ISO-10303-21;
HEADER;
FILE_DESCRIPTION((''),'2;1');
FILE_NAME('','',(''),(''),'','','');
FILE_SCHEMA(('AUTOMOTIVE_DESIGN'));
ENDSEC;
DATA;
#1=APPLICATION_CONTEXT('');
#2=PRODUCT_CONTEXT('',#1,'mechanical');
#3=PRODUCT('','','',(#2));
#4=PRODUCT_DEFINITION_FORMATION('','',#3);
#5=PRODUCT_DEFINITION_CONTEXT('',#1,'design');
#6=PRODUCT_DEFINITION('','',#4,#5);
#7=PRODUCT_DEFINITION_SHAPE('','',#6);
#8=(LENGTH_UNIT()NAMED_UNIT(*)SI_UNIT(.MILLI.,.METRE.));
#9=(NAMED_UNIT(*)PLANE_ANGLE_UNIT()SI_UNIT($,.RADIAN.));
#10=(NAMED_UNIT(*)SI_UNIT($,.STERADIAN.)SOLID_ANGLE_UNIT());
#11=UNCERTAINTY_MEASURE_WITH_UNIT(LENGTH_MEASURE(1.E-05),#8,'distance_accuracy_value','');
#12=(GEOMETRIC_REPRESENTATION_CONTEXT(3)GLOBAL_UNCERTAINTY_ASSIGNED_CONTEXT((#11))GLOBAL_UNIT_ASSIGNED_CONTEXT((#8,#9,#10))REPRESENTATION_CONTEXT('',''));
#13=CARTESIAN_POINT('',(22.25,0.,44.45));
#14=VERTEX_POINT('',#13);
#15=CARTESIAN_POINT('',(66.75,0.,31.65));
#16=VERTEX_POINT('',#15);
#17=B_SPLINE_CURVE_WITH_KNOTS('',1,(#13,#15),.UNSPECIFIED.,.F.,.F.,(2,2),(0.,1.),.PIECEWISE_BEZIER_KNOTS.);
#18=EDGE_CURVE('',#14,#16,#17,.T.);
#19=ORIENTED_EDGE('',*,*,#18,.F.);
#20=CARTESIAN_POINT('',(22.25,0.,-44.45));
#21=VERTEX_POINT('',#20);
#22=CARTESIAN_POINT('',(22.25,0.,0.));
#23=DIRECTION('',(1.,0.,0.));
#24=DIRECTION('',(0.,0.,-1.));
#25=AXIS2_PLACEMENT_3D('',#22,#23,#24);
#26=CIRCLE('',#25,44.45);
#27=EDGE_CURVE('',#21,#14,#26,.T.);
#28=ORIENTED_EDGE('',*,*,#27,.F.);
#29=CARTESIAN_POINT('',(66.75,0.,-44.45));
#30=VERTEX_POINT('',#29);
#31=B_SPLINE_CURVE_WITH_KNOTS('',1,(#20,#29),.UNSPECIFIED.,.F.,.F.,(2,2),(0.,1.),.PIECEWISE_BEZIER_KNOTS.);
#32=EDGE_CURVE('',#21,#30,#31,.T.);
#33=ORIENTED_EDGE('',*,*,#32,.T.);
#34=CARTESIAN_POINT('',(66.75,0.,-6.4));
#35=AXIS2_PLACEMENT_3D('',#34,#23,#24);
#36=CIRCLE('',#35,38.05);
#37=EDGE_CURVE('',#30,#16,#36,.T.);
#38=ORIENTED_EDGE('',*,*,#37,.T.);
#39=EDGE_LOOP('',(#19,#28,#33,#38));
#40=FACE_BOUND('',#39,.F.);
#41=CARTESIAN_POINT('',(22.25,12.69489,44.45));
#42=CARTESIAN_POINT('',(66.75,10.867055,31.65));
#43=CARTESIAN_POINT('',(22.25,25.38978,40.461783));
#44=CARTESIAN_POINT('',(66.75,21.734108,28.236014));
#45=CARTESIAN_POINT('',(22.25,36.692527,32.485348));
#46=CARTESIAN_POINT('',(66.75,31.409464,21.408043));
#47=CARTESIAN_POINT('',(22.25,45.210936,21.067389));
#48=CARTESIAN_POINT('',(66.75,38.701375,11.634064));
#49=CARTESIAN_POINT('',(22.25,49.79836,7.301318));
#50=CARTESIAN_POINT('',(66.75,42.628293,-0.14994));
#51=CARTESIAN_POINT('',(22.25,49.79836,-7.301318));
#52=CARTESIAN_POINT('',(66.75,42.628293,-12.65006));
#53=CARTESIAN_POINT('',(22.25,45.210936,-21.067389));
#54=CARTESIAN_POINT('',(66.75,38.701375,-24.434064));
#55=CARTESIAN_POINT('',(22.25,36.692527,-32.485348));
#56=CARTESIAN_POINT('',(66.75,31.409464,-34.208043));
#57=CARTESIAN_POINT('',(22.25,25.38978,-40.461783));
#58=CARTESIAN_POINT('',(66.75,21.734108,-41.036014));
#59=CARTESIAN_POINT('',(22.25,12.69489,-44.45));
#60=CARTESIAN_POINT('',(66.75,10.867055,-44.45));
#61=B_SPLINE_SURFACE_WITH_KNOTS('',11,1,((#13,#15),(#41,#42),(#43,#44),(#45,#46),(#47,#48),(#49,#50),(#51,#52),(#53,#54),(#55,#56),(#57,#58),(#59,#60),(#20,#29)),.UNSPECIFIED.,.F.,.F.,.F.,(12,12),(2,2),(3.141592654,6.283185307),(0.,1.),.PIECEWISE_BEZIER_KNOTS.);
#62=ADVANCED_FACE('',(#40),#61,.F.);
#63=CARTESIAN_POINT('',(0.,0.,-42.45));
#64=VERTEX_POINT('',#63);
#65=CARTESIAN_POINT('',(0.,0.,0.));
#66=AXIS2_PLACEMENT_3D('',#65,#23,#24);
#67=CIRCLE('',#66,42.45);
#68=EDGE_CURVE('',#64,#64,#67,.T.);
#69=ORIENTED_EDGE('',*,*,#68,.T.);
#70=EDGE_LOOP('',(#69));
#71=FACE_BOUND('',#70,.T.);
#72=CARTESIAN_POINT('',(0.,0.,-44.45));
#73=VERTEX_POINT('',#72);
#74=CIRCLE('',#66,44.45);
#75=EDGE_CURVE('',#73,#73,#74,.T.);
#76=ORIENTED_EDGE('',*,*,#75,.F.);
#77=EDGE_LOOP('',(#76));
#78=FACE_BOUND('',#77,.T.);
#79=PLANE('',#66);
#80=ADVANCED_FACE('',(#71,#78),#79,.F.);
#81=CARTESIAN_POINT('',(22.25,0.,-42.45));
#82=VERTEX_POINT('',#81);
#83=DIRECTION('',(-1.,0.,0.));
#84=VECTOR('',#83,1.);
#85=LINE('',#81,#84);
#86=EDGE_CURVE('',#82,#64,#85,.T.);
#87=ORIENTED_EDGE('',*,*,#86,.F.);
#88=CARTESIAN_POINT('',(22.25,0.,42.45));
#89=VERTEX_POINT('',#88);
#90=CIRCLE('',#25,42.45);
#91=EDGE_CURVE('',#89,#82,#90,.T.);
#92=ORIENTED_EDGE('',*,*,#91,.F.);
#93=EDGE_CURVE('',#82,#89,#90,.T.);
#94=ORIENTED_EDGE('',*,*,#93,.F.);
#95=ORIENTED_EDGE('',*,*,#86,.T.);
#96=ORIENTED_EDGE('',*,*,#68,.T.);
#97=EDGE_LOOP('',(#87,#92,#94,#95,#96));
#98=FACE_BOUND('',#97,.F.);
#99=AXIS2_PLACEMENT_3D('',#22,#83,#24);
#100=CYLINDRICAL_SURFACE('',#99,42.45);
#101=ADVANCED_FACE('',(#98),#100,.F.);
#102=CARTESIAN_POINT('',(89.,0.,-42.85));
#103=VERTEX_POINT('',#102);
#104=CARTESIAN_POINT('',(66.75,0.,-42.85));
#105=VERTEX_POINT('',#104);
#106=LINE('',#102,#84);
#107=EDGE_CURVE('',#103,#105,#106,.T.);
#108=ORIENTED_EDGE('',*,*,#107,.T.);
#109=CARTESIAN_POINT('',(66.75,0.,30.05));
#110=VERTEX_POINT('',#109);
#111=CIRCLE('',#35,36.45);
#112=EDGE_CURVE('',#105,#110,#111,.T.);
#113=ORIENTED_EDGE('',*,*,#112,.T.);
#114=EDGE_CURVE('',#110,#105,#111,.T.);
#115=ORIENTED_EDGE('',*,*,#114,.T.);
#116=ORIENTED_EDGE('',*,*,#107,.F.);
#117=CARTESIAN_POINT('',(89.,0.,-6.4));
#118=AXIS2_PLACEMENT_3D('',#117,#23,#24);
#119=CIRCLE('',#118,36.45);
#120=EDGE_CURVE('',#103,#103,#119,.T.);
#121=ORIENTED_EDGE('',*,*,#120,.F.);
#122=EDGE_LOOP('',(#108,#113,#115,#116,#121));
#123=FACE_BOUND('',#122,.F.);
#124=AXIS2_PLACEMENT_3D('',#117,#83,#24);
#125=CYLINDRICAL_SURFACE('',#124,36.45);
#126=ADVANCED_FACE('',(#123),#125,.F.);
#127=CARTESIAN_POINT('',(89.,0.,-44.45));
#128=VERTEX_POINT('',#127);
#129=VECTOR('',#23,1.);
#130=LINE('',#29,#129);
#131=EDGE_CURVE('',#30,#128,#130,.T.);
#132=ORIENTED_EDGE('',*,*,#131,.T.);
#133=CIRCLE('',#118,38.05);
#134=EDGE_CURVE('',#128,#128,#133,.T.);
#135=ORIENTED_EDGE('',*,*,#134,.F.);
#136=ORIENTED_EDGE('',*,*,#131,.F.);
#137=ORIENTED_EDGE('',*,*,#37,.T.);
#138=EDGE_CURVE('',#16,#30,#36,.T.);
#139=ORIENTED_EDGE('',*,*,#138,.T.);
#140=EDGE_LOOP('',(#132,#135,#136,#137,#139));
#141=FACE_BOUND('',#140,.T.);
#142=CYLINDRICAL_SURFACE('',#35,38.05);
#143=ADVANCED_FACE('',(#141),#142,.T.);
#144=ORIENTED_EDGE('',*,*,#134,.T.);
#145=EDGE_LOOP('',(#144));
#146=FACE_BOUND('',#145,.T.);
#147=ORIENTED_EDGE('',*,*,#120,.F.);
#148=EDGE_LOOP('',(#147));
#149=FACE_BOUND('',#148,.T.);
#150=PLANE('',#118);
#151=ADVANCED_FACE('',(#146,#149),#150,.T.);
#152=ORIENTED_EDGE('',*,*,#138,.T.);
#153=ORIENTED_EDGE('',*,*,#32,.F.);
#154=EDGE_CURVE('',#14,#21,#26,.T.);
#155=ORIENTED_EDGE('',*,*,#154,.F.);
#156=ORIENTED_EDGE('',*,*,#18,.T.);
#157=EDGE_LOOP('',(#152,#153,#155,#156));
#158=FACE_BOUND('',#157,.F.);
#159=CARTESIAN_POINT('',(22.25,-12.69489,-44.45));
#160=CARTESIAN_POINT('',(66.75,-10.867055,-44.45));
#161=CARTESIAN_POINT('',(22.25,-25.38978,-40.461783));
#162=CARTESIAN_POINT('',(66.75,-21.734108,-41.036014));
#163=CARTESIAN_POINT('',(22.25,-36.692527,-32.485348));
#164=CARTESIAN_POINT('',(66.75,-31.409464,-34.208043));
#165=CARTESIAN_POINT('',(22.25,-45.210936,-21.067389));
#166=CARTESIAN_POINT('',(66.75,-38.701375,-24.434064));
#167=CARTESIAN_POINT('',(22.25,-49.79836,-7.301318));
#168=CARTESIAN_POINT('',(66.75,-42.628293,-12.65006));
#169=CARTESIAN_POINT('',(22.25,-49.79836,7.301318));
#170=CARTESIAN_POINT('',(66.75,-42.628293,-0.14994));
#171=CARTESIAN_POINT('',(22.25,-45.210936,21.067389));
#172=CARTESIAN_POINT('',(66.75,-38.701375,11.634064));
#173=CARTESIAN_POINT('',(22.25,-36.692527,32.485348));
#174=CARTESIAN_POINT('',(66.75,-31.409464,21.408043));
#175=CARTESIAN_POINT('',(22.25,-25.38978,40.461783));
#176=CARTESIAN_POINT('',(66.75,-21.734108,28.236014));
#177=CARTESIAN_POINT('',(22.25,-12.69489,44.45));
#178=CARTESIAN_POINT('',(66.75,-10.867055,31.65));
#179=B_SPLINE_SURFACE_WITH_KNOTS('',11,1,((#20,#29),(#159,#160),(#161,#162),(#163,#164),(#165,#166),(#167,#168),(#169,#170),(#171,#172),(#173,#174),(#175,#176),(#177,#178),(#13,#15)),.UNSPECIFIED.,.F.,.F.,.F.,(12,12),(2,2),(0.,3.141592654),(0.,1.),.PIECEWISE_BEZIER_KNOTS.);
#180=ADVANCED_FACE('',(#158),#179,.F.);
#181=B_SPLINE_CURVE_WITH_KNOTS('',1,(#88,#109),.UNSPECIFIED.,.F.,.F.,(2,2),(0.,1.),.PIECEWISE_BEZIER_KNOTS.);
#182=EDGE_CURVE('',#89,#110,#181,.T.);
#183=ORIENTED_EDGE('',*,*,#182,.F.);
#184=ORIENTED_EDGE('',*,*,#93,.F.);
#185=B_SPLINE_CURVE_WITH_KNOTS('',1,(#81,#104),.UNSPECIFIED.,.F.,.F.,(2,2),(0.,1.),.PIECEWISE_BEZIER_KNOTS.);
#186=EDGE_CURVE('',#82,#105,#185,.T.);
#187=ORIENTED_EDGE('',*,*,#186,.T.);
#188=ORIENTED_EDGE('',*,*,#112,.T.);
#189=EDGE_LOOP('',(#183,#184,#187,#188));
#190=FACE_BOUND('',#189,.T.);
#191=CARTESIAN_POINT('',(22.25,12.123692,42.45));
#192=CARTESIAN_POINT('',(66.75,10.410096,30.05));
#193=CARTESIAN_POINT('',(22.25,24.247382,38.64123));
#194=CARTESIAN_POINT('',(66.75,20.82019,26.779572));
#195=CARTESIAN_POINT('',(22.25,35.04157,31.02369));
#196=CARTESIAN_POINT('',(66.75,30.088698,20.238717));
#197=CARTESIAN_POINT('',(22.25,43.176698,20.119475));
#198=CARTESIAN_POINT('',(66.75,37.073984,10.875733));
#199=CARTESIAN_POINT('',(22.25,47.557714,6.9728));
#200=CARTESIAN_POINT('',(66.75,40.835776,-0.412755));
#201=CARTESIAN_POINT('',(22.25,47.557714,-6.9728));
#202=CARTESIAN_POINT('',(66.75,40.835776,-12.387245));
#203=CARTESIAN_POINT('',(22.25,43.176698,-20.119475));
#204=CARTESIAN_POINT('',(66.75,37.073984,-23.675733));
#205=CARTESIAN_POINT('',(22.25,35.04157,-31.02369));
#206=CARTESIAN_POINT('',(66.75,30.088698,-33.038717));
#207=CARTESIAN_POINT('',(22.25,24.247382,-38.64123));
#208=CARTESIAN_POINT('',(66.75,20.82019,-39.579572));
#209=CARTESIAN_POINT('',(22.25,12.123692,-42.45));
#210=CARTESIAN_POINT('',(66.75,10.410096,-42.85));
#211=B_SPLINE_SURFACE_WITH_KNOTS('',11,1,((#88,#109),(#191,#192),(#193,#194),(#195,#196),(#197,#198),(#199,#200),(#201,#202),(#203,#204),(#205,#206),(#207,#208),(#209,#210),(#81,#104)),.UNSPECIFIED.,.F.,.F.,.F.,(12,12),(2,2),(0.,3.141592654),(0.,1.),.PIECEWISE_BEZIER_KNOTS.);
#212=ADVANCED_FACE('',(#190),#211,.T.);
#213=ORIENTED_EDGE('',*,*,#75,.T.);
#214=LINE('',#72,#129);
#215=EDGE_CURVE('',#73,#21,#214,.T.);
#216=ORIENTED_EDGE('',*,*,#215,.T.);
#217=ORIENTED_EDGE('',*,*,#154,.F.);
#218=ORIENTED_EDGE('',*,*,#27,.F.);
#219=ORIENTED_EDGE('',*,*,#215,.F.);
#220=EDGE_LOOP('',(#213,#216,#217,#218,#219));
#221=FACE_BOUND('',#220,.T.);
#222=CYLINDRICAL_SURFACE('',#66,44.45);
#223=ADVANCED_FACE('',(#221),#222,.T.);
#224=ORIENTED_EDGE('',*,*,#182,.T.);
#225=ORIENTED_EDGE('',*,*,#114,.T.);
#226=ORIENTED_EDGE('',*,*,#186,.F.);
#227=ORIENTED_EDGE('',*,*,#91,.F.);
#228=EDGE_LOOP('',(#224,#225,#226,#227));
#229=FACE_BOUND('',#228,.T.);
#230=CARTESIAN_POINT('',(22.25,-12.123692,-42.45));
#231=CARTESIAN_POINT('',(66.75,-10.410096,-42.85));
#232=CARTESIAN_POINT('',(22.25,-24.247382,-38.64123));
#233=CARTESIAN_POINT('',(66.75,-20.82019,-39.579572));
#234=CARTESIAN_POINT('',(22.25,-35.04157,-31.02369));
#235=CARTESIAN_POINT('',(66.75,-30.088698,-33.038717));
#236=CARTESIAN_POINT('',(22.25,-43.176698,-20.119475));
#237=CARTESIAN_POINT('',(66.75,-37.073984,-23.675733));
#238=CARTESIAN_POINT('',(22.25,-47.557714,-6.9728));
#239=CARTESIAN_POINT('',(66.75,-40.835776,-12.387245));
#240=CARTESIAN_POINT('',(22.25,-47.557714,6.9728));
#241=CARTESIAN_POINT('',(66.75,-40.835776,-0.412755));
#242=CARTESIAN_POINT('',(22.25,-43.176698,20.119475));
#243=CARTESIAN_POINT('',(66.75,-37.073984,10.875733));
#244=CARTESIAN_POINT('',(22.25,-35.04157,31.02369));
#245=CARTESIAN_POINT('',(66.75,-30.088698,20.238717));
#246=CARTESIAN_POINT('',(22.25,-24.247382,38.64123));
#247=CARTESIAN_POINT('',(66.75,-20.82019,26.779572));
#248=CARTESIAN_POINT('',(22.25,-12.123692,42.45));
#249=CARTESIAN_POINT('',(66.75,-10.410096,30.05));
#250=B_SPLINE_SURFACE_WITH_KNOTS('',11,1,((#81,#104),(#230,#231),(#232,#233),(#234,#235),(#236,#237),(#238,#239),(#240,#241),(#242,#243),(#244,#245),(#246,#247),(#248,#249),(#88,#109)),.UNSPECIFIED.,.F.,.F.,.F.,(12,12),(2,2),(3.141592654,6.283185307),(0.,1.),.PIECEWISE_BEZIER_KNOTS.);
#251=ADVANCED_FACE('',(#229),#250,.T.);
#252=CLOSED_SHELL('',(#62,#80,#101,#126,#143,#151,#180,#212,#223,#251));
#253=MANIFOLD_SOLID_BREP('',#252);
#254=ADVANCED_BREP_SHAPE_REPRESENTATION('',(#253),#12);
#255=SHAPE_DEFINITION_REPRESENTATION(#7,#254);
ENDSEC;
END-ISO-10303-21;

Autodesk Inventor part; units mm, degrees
ref_plane "YZ Plane" through (0, 0, 0) normal (1, 0, 0) x (0, 1, 0)
ref_plane "XZ Plane" through (0, 0, 0) normal (0, 1, 0) x (-1, 0, 0)
ref_plane "XY Plane" through (0, 0, 0) normal (0, 0, 1) x (1, 0, 0)
sketch "Sketch1" plane through (0, 0, 0) normal (0, 1, 0) x (-1, 0, 0)
  line L0 (0, -44.45) -> (-22.25, -44.45)
  line L1 (-22.25, -44.45) -> (-22.25, -42.45)
  line L2 (-22.25, -42.45) -> (0, -42.45)
  line L3 (0, -42.45) -> (0, -44.45)
  line L4 (0, -42.45) -> (0, 0) construction
  line L5 (0, 0) -> (-22.25, 0)
  line L6 (-22.25, 0) -> (-22.25, -42.45) construction
  dimension "d0" = 2
  dimension "d1" = 22.25
  dimension "d15" = 88.9
revolve "Revolve1" add sketch "Sketch1" angle 360 about axis through (0, 0, 0) along (1, 0, 0)
sketch "Sketch2" plane through (0, 0, 0) normal (0, 1, 0) x (-1, 0, 0)
  line L0 (0, -44.45) -> (-22.25, -44.45) projected
  line L1 (-66.75, -44.45) -> (-89, -44.45)
  line L2 (-89, -44.45) -> (-89, -42.85)
  line L3 (-89, -42.85) -> (-66.75, -42.85)
  line L4 (-66.75, -42.85) -> (-66.75, -44.45)
  line L5 (-22.25, -44.45) -> (-66.75, -44.45) construction
  line L6 (-66.75, -42.85) -> (-66.75, -6.4) construction
  line L7 (-66.75, -6.4) -> (-89, -6.4) construction
  line L8 (-89, -6.4) -> (-89, -42.85) construction
  dimension "d2" = 44.5
  dimension "d4" = 1.6
  dimension "d5" = 22.25
  dimension "d16" = 76.1
revolve "Revolve2" add sketch "Sketch2" angle 360 about axis through (66.75, 0, -6.4) along (1, 0, 0)
sketch "Sketch3" plane through (66.75, 0, -6.4) normal (-1, 0, 0) x (0, 0, 1)
  circle A0 centre (0, 0) radius 38.05 projected
loft "Loft1" add profiles "Sketch3" section 1 edges at (22.25, 0, 44.45)
sketch "Sketch4" plane through (22.25, 0, 0) normal (-1, 0, 0) x (0, 0, 1)
  circle A0 centre (0, 0) radius 42.45
  circle A1 centre (0, 0) radius 42.45 projected
sketch "Sketch5" plane through (66.75, 0, -6.4) normal (1, 0, 0) x (0, 0, -1)
  circle A0 centre (0, 0) radius 36.45
  circle A1 centre (0, 0) radius 36.45 projected
loft "Loft2" cut profiles "Sketch4", "Sketch5"
equation "\"d0\" = T"
equation "\"d1\" = 0.25 * L"
equation "\"d15\" = D"
equation "\"d2\" = 0.5 * L"
equation "\"d4\" = T1"
equation "\"d5\" = 0.25 * L"
equation "\"d16\" = D1"
equation "\"D\" = 88.9"
equation "\"T\" = 2"
equation "\"L\" = 89"
equation "\"D1\" = 76.1"
equation "\"T1\" = 1.6"
equation "\"Size_Designation\" = 1.2345"
properties part number "ISO 5251 Eccentric reducers DN80 x DN65 2" material "Stainless Steel"
